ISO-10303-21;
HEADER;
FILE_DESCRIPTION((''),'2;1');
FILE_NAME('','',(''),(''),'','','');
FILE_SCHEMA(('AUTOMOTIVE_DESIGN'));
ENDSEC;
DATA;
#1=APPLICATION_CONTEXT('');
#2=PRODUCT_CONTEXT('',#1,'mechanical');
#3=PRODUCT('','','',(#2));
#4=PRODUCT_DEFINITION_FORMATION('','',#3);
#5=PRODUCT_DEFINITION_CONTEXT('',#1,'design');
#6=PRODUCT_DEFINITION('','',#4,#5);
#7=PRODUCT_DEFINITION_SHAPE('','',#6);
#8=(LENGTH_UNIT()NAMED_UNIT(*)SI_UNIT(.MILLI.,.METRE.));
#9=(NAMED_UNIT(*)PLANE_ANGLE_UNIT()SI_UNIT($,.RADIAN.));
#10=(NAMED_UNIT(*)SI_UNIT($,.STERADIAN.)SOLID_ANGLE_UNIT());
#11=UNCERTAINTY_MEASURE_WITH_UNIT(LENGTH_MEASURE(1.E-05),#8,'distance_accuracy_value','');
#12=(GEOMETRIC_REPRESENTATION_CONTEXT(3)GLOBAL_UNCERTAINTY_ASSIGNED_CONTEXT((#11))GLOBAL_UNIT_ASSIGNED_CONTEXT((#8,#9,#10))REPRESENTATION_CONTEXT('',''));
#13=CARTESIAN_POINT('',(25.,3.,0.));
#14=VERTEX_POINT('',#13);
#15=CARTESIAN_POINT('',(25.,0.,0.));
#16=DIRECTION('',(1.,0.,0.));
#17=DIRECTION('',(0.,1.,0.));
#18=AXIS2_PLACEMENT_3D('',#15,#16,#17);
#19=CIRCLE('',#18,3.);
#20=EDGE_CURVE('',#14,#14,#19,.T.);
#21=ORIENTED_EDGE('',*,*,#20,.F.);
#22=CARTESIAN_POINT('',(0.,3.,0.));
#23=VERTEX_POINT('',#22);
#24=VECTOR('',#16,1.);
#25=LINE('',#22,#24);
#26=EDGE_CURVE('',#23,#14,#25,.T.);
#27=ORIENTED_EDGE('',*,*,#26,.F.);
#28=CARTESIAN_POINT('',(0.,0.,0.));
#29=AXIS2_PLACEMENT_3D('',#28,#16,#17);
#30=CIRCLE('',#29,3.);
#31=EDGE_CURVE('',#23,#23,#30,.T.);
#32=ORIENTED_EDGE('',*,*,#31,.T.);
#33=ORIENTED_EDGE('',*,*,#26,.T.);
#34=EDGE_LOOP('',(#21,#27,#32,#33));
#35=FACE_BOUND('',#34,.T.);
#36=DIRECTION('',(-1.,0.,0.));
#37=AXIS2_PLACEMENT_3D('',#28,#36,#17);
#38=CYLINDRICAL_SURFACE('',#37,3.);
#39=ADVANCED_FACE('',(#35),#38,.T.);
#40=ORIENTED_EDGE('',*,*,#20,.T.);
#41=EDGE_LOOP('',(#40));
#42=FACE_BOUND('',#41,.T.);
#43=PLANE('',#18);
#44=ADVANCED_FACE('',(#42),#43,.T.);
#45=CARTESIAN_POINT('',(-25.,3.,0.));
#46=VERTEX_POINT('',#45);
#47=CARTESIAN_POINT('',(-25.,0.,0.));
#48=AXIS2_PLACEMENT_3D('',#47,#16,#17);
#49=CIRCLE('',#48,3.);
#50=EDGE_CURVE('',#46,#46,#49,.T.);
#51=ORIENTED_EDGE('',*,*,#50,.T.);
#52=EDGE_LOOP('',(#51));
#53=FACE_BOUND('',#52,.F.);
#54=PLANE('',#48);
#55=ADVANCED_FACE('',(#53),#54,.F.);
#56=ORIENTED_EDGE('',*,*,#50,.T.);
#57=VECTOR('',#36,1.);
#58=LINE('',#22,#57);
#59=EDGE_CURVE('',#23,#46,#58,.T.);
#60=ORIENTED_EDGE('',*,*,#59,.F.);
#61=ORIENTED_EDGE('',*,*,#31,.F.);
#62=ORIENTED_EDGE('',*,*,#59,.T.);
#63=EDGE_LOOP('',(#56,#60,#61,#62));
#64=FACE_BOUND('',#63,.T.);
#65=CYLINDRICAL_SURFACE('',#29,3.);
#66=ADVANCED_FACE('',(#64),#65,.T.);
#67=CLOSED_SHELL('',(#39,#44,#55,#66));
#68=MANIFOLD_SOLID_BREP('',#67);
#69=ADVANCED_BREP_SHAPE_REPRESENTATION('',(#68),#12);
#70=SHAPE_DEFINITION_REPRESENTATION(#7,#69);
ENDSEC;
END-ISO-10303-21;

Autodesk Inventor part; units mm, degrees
ref_plane "YZ Plane" through (0, 0, 0) normal (1, 0, 0) x (0, 1, 0)
ref_plane "XZ Plane" through (0, 0, 0) normal (0, 1, 0) x (-1, 0, 0)
ref_plane "XY Plane" through (0, 0, 0) normal (0, 0, 1) x (1, 0, 0)
sketch "Skizze1" plane through (0, 0, 0) normal (1, 0, 0) x (0, 1, 0)
  circle A0 centre (0, 0) radius 3
  dimension "d0" = 6
extrude "Extrusion1" add sketch "Skizze1" along normal mid plane 50
thread "Gewinde1" size "M6x1" class "6g" standard "ISO Metric profile" length 10
thread "Gewinde2" size "M6x1" class "6g" standard "ISO Metric profile" length 7
properties part number "sf_Cylinder_Pivot_Shaft_1"
